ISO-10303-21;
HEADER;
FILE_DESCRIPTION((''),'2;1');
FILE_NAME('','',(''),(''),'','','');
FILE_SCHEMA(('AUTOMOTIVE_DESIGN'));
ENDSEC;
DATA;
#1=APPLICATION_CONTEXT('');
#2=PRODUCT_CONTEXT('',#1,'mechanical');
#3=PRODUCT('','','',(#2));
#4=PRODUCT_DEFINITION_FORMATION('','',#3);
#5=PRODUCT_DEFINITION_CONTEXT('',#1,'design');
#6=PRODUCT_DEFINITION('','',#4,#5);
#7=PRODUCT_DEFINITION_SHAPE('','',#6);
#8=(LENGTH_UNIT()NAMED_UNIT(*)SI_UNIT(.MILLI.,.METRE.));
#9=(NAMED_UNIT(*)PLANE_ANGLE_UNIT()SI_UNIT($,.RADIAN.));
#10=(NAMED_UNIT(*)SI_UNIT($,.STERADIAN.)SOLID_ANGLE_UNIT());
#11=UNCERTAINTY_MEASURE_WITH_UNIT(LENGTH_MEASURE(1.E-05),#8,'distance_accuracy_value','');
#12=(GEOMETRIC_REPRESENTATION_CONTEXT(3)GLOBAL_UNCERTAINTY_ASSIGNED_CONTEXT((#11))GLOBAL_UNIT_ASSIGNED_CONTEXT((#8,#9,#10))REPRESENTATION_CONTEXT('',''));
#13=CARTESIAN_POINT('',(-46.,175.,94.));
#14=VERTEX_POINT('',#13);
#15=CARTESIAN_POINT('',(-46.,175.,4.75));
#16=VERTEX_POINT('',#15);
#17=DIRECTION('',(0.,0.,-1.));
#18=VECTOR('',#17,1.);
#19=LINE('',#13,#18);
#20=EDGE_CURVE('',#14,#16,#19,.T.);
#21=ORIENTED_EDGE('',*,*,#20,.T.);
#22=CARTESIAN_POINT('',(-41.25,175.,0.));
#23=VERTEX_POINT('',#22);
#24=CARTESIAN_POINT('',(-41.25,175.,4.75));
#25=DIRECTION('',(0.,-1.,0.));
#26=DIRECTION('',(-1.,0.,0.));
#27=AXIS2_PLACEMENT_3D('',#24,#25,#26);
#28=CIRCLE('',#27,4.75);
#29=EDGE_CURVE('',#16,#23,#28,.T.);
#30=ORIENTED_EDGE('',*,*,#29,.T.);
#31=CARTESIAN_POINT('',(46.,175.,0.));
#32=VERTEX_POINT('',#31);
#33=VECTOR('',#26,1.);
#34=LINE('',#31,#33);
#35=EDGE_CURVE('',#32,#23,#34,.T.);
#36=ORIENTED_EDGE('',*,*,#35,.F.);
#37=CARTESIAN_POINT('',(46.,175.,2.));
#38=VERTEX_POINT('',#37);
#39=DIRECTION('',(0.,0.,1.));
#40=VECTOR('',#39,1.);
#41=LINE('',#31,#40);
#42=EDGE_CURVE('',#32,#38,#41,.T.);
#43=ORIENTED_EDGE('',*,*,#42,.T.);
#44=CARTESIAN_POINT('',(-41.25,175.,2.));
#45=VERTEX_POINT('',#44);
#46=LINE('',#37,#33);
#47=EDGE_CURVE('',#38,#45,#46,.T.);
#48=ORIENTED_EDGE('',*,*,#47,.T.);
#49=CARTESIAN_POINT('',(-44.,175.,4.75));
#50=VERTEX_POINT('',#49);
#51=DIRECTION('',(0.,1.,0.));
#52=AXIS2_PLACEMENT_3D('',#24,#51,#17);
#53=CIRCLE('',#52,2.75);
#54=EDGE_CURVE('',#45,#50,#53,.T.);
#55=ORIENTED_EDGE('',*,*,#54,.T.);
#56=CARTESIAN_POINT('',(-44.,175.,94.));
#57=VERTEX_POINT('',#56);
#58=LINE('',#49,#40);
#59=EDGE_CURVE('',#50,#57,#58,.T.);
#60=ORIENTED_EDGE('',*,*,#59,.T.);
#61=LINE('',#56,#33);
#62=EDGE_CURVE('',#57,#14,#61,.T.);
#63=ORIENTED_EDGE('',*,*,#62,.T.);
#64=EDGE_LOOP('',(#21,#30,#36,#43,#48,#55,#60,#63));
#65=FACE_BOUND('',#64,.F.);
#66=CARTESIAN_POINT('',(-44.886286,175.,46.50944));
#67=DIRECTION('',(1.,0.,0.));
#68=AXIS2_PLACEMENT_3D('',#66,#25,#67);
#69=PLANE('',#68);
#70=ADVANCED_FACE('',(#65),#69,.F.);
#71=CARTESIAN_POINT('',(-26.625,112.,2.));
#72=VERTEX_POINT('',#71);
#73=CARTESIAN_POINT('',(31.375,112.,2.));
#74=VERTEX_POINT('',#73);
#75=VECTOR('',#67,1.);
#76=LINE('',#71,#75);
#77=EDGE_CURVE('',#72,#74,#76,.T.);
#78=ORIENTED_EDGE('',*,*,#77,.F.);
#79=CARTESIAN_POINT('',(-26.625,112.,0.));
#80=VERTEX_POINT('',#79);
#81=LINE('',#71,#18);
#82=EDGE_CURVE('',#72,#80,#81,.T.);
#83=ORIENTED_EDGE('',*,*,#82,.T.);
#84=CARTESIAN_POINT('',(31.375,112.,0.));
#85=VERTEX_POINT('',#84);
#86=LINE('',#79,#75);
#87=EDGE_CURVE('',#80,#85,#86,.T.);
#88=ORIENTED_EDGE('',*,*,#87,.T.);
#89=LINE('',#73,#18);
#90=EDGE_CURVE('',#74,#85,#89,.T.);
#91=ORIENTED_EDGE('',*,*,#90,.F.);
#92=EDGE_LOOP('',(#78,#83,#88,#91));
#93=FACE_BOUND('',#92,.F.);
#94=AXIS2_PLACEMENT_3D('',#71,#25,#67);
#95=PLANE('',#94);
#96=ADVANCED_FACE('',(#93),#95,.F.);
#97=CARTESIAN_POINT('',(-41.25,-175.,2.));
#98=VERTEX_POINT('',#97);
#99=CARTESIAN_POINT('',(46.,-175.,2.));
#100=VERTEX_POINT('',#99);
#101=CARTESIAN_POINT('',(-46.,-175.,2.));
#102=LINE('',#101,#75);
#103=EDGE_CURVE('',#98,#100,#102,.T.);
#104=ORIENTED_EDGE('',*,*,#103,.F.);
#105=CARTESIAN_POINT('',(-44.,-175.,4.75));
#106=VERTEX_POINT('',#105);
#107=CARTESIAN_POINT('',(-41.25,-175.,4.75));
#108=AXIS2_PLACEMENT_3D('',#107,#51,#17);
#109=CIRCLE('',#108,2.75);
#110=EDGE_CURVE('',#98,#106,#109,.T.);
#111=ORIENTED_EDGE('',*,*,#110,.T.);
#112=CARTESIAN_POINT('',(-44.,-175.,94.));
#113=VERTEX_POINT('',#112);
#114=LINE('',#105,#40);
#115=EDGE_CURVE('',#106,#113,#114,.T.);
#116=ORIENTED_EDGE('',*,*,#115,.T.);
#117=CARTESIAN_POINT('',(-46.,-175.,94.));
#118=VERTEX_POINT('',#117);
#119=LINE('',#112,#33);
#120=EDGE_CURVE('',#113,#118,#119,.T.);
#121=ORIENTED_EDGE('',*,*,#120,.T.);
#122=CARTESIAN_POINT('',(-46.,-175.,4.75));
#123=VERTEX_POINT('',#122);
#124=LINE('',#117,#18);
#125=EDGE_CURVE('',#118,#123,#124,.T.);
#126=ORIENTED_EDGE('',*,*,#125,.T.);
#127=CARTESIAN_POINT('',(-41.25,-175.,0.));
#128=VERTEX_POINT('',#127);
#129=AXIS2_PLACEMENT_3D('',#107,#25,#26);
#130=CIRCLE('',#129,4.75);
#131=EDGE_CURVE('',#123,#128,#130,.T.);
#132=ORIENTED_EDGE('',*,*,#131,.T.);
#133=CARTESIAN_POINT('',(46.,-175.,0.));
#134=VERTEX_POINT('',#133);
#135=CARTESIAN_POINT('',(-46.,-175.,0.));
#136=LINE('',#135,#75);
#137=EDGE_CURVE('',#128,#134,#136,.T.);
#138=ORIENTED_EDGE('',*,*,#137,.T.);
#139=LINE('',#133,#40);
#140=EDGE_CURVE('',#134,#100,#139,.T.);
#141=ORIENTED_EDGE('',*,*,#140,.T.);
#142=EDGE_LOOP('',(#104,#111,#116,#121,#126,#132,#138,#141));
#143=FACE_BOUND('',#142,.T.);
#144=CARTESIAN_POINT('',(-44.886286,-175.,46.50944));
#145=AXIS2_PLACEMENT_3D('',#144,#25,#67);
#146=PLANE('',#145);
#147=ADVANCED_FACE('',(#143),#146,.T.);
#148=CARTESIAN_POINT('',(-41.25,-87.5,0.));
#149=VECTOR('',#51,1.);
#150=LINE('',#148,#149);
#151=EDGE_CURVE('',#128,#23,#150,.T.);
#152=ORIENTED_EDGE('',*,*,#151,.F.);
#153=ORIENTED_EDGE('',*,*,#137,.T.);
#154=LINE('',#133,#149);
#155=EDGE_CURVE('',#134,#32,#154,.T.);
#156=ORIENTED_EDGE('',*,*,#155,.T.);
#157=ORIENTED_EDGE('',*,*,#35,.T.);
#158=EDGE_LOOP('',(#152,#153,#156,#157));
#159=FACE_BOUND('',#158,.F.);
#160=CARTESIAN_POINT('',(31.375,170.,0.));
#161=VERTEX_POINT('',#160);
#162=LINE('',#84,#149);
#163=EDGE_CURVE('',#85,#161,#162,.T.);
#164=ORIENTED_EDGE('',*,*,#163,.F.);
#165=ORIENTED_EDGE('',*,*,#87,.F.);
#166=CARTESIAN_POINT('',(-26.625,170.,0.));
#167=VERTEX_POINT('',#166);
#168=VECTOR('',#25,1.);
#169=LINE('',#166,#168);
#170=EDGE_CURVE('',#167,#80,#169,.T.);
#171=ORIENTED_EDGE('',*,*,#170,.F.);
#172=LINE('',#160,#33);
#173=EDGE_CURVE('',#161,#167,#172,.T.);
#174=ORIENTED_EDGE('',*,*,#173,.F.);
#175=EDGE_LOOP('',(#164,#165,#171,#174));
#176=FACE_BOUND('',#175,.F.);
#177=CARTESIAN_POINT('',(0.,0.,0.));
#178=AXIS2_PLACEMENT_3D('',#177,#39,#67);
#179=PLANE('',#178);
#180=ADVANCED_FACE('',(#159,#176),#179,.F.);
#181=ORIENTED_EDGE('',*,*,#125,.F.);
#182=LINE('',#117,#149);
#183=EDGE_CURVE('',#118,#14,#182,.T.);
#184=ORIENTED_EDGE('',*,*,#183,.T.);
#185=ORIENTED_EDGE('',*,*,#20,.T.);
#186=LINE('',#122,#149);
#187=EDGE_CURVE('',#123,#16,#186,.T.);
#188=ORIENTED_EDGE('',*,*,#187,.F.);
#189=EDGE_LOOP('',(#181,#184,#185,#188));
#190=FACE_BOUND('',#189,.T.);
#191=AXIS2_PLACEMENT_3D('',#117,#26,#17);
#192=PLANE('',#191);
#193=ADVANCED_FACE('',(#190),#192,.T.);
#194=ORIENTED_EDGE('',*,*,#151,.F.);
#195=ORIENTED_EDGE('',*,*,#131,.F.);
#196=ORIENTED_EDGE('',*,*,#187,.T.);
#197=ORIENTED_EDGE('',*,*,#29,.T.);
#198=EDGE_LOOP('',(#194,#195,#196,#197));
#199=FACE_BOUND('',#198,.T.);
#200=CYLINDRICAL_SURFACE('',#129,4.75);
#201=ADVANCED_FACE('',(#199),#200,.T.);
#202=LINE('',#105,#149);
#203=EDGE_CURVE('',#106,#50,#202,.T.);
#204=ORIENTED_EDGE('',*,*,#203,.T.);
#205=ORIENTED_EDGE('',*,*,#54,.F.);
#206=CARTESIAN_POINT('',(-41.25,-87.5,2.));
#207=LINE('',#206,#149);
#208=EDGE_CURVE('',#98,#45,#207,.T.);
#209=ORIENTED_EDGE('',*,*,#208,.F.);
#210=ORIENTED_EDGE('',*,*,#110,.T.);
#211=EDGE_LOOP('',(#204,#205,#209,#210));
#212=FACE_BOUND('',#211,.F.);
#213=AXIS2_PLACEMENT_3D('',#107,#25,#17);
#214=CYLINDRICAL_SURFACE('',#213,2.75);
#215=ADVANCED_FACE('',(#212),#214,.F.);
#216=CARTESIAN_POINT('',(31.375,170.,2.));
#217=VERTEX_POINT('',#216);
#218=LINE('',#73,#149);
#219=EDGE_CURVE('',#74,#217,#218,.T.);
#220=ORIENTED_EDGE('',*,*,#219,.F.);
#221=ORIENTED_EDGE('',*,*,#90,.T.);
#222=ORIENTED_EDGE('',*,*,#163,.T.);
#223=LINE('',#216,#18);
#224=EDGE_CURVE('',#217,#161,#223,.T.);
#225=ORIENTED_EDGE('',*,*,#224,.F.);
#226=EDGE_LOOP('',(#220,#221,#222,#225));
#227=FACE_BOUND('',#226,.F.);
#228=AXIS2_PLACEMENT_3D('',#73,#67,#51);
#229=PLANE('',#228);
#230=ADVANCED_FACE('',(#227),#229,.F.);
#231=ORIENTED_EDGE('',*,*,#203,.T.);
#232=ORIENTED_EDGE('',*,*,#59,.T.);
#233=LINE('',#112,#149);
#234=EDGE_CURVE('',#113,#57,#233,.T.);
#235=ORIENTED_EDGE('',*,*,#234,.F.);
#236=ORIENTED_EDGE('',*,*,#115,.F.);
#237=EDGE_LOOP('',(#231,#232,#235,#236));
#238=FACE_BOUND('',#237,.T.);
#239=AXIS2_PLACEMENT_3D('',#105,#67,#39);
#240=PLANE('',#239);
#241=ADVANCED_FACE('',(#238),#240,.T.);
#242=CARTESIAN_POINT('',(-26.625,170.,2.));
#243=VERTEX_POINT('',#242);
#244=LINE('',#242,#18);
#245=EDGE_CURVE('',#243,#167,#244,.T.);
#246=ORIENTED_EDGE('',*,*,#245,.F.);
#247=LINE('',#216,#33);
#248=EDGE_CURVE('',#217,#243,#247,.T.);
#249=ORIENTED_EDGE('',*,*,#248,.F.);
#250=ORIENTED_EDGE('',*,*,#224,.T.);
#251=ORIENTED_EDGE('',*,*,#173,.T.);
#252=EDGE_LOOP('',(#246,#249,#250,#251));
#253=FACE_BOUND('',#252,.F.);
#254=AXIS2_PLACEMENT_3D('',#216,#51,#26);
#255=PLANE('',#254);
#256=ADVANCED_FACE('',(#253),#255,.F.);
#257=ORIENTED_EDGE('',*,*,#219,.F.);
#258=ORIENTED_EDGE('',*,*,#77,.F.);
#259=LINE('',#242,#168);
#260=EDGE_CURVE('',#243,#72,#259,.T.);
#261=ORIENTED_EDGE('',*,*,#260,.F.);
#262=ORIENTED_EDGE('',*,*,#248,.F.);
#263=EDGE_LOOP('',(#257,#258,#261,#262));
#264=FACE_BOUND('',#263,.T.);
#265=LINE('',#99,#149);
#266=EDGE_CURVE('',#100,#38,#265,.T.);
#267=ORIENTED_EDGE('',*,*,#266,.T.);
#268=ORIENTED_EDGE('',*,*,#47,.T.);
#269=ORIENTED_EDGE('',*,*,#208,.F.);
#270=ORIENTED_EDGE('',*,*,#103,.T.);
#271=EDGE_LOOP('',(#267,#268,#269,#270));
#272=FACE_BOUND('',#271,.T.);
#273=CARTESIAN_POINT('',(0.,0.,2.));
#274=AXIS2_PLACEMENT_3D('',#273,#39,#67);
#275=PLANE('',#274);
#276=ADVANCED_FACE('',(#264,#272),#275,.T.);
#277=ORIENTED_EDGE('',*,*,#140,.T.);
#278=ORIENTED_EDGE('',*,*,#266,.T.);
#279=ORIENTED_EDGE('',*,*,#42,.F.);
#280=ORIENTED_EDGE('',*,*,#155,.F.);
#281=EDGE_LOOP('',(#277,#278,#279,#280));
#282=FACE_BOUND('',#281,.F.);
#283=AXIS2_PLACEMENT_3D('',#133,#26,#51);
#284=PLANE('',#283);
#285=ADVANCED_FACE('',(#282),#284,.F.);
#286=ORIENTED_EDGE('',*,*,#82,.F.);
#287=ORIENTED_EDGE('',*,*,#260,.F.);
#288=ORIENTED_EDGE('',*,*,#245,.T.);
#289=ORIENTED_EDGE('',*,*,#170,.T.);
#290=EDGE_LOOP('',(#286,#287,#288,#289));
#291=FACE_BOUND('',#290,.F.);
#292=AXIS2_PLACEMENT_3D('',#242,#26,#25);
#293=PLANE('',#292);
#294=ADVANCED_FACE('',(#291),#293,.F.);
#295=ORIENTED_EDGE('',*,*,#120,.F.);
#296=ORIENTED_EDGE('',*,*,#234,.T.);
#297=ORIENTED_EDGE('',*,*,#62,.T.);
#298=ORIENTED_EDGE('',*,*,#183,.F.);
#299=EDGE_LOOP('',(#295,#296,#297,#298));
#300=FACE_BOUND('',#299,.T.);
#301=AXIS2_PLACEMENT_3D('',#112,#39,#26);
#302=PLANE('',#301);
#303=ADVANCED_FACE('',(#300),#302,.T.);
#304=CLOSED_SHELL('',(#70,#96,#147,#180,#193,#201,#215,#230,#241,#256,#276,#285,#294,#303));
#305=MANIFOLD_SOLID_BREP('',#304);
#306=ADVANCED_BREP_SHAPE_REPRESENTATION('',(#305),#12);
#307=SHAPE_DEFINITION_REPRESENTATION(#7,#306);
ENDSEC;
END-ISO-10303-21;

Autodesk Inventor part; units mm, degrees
ref_plane "YZ Plane" through (0, 0, 0) normal (1, 0, 0) x (0, 1, 0)
ref_plane "XZ Plane" through (0, 0, 0) normal (0, 1, 0) x (-1, 0, 0)
ref_plane "XY Plane" through (0, 0, 0) normal (0, 0, 1) x (1, 0, 0)
sketch "Sketch1" plane through (0, 0, 0) normal (0, 0, 1) x (1, 0, 0)
  line L0 (-46, -175) -> (46, -175)
  line L1 (46, -175) -> (46, 175)
  line L2 (46, 175) -> (-46, 175)
  line L3 (-46, 175) -> (-46, -175)
  line L4 (-46, -175) -> (46, 175) construction
  line L5 (46, -175) -> (-46, 175) construction
  point P0 (0, 0)
  dimension "d154" = 92
  dimension "d155" = 350
extrude "Plate5" add sketch "Sketch1" along normal blind 2
sketch "Sketch7" plane through (-44, -175, 0) normal (-1, 0, 0) x (0, -1, 0)
  line L0 (-350, 0) -> (0, 0)
  line L1 (0, 0) -> (0, 94)
  line L2 (0, 94) -> (-350, 94)
  line L3 (-350, 94) -> (-350, 0)
edge flange "Flange3" height 94 angle 90 thickness 2 bend radius 2.75 thickness toward (-1, 0, 0) relief round relief width 2 relief depth 1 edges at (-46, 0, 2) wall of the first edge with corners at (-44, 175, 0) (-44, -175, 0) (-44, -175, 94) (-44, 175, 94)
bend "Bend3"
corner "Corner3"
sketch "Sketch8" plane through (0, 0, 2) normal (0, 0, 1) x (1, 0, 0)
  line L0 (46, 175) -> (46, -175) projected
  line L1 (-41.25, 175) -> (46, 175) projected
  line L2 (31.375, 170) -> (-26.625, 170)
  line L3 (-26.625, 170) -> (-26.625, 112)
  line L4 (-26.625, 112) -> (31.375, 112)
  line L5 (31.375, 112) -> (31.375, 170)
  line L6 (31.375, 170) -> (-26.625, 112) construction
  line L7 (-26.625, 170) -> (31.375, 112) construction
  point P0 (0, 0)
  point P1 (2.375, 141)
  point P2 (2.375, 175)
  dimension "d167" = 58
  dimension "d168" = 58
  dimension "d169" = 5
extrude "Cut1" cut sketch "Sketch8" against normal blind 2
properties part number "PNS 752 FDS 1200 FLANGE 2_1600" material "Stainless Steel"
